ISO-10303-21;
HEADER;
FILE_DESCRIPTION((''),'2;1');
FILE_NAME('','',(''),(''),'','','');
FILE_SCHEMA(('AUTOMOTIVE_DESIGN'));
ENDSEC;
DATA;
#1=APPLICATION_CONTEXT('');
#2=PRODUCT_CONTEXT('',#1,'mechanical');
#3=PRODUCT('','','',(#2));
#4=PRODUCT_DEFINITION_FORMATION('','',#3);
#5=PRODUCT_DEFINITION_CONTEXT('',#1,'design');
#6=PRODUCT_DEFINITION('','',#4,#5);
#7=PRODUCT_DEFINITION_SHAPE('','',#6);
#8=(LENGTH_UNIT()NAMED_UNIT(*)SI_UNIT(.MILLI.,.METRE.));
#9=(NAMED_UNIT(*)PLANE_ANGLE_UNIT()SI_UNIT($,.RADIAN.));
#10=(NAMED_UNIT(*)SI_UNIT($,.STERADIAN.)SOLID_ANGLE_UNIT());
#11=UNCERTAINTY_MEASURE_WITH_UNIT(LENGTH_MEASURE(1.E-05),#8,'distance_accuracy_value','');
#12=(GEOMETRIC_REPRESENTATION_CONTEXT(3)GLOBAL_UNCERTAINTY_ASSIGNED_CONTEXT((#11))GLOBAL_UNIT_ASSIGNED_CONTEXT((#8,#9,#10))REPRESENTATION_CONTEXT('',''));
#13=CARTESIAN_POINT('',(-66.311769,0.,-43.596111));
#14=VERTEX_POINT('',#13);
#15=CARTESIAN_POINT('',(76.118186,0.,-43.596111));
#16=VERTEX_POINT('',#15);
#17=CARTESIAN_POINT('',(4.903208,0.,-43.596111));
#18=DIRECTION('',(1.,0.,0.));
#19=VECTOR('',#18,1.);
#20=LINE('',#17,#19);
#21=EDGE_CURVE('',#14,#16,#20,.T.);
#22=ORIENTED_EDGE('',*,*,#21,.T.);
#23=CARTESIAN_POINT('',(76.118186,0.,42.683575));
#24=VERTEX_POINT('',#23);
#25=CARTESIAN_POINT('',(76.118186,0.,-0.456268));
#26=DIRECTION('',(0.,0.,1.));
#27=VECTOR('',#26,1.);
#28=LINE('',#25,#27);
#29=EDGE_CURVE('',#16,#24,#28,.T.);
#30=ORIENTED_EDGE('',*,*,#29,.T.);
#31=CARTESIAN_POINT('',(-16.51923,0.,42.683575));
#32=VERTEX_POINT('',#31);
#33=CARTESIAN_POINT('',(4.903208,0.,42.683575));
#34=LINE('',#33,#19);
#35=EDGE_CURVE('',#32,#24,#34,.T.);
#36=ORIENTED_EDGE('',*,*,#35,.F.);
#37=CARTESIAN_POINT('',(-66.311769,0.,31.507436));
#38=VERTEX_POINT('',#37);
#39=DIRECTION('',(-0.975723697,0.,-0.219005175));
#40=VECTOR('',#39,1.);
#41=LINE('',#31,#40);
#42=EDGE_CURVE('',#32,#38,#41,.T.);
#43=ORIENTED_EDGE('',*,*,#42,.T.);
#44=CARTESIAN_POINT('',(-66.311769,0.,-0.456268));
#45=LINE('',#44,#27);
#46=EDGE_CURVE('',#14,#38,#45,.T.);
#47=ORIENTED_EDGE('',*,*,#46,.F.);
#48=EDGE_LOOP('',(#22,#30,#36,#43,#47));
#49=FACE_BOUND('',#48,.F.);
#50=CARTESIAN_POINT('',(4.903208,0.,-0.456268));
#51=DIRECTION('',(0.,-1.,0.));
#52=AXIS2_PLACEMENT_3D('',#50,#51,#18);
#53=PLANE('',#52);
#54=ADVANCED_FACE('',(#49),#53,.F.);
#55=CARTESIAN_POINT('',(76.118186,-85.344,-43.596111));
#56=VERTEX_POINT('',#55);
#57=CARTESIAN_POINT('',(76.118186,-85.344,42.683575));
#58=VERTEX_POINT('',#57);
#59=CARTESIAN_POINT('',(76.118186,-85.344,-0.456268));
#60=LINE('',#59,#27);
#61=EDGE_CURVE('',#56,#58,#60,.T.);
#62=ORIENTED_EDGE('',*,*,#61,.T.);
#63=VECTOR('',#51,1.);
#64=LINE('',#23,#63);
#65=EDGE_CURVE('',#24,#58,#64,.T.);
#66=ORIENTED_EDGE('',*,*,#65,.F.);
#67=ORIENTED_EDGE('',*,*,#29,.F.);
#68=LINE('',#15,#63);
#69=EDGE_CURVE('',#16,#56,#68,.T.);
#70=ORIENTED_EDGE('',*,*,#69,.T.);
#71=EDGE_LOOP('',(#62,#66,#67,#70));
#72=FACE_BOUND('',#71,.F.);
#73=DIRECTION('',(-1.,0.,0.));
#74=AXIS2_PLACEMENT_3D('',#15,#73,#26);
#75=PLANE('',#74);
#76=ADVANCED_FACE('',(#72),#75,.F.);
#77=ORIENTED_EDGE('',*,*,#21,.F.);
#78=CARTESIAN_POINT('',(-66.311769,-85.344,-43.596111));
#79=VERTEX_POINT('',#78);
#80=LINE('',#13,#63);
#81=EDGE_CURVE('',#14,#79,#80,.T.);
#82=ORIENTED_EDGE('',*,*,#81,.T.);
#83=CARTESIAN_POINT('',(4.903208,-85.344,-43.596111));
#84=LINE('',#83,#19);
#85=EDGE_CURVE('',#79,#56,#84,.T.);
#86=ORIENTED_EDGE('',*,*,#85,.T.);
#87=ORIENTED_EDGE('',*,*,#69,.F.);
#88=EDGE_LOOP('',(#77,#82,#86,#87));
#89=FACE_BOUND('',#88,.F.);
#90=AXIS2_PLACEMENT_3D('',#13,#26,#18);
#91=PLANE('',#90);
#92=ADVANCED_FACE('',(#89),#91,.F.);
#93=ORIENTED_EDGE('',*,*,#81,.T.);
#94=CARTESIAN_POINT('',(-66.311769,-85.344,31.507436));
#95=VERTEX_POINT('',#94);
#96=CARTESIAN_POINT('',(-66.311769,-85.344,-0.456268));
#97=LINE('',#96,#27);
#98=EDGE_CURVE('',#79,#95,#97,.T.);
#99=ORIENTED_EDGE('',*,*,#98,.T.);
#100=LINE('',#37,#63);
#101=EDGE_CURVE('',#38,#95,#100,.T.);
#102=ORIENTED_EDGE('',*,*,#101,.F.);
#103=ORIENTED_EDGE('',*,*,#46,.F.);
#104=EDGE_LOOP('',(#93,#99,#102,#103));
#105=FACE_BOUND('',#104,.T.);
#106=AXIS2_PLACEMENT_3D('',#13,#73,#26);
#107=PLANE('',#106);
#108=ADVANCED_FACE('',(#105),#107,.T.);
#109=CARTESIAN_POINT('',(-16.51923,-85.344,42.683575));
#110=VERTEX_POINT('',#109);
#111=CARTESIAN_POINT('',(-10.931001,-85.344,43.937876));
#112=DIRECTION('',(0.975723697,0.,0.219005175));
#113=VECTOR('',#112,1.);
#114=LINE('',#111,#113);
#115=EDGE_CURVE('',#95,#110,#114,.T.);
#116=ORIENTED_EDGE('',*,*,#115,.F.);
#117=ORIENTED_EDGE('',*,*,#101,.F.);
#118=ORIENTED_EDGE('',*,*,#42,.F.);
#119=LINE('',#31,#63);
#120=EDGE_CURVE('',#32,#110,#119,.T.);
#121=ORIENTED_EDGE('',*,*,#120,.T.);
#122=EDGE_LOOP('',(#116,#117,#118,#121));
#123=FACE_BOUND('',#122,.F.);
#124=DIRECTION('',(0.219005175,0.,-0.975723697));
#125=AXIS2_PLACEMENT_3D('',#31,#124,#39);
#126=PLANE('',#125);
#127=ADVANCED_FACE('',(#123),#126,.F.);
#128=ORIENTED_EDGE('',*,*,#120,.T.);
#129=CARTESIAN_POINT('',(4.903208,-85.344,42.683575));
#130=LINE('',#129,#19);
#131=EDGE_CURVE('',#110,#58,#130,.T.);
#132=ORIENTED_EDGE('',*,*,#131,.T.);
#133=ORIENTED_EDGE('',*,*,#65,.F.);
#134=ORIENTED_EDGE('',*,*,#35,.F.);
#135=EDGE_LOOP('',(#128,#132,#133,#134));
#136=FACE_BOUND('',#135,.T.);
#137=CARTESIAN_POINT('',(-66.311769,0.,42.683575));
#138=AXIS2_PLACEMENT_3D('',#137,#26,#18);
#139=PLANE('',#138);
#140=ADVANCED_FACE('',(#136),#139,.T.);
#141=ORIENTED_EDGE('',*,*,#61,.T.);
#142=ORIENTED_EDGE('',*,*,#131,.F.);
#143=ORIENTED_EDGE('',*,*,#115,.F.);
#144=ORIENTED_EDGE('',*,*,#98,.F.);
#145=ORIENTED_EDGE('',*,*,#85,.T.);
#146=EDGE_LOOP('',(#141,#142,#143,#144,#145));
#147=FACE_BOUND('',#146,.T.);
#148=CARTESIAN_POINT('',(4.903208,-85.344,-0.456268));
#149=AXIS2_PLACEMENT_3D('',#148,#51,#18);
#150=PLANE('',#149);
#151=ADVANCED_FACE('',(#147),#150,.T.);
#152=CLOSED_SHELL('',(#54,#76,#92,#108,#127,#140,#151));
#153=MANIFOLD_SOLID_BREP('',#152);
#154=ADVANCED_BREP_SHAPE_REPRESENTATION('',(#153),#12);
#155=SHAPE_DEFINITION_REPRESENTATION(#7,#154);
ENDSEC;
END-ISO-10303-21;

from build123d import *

# Parameters (mm, degrees)
F0_W     = 142.4299553037
F0_H     = 86.2796865404
F1_DEPTH = 85.344
F3_DEPTH = 101.6


# Not quite as in the source:
# - a feature names something its author has since deleted; it is built from what else it names


with BuildPart() as f1:
    # F0 (on Front) → F1 (new body)
    with BuildSketch(Plane.XZ):
        with Locations((4.9032084644, -0.4562679678)):
            Rectangle(F0_W, F0_H)
    extrude(amount=F1_DEPTH)

    # F2 (on face) → F3 (cut)
    with BuildSketch(Plane(origin=(0, 0, 0), x_dir=(-1, 0, 0), z_dir=(0, 1, 0))):
        Polygon((16.5192298591, 42.6835753024), (66.3117691875, 31.5074361861), (66.3117691875, 42.6835753024), align=None)
    extrude(amount=-F3_DEPTH, mode=Mode.SUBTRACT)


solid = f1.part
